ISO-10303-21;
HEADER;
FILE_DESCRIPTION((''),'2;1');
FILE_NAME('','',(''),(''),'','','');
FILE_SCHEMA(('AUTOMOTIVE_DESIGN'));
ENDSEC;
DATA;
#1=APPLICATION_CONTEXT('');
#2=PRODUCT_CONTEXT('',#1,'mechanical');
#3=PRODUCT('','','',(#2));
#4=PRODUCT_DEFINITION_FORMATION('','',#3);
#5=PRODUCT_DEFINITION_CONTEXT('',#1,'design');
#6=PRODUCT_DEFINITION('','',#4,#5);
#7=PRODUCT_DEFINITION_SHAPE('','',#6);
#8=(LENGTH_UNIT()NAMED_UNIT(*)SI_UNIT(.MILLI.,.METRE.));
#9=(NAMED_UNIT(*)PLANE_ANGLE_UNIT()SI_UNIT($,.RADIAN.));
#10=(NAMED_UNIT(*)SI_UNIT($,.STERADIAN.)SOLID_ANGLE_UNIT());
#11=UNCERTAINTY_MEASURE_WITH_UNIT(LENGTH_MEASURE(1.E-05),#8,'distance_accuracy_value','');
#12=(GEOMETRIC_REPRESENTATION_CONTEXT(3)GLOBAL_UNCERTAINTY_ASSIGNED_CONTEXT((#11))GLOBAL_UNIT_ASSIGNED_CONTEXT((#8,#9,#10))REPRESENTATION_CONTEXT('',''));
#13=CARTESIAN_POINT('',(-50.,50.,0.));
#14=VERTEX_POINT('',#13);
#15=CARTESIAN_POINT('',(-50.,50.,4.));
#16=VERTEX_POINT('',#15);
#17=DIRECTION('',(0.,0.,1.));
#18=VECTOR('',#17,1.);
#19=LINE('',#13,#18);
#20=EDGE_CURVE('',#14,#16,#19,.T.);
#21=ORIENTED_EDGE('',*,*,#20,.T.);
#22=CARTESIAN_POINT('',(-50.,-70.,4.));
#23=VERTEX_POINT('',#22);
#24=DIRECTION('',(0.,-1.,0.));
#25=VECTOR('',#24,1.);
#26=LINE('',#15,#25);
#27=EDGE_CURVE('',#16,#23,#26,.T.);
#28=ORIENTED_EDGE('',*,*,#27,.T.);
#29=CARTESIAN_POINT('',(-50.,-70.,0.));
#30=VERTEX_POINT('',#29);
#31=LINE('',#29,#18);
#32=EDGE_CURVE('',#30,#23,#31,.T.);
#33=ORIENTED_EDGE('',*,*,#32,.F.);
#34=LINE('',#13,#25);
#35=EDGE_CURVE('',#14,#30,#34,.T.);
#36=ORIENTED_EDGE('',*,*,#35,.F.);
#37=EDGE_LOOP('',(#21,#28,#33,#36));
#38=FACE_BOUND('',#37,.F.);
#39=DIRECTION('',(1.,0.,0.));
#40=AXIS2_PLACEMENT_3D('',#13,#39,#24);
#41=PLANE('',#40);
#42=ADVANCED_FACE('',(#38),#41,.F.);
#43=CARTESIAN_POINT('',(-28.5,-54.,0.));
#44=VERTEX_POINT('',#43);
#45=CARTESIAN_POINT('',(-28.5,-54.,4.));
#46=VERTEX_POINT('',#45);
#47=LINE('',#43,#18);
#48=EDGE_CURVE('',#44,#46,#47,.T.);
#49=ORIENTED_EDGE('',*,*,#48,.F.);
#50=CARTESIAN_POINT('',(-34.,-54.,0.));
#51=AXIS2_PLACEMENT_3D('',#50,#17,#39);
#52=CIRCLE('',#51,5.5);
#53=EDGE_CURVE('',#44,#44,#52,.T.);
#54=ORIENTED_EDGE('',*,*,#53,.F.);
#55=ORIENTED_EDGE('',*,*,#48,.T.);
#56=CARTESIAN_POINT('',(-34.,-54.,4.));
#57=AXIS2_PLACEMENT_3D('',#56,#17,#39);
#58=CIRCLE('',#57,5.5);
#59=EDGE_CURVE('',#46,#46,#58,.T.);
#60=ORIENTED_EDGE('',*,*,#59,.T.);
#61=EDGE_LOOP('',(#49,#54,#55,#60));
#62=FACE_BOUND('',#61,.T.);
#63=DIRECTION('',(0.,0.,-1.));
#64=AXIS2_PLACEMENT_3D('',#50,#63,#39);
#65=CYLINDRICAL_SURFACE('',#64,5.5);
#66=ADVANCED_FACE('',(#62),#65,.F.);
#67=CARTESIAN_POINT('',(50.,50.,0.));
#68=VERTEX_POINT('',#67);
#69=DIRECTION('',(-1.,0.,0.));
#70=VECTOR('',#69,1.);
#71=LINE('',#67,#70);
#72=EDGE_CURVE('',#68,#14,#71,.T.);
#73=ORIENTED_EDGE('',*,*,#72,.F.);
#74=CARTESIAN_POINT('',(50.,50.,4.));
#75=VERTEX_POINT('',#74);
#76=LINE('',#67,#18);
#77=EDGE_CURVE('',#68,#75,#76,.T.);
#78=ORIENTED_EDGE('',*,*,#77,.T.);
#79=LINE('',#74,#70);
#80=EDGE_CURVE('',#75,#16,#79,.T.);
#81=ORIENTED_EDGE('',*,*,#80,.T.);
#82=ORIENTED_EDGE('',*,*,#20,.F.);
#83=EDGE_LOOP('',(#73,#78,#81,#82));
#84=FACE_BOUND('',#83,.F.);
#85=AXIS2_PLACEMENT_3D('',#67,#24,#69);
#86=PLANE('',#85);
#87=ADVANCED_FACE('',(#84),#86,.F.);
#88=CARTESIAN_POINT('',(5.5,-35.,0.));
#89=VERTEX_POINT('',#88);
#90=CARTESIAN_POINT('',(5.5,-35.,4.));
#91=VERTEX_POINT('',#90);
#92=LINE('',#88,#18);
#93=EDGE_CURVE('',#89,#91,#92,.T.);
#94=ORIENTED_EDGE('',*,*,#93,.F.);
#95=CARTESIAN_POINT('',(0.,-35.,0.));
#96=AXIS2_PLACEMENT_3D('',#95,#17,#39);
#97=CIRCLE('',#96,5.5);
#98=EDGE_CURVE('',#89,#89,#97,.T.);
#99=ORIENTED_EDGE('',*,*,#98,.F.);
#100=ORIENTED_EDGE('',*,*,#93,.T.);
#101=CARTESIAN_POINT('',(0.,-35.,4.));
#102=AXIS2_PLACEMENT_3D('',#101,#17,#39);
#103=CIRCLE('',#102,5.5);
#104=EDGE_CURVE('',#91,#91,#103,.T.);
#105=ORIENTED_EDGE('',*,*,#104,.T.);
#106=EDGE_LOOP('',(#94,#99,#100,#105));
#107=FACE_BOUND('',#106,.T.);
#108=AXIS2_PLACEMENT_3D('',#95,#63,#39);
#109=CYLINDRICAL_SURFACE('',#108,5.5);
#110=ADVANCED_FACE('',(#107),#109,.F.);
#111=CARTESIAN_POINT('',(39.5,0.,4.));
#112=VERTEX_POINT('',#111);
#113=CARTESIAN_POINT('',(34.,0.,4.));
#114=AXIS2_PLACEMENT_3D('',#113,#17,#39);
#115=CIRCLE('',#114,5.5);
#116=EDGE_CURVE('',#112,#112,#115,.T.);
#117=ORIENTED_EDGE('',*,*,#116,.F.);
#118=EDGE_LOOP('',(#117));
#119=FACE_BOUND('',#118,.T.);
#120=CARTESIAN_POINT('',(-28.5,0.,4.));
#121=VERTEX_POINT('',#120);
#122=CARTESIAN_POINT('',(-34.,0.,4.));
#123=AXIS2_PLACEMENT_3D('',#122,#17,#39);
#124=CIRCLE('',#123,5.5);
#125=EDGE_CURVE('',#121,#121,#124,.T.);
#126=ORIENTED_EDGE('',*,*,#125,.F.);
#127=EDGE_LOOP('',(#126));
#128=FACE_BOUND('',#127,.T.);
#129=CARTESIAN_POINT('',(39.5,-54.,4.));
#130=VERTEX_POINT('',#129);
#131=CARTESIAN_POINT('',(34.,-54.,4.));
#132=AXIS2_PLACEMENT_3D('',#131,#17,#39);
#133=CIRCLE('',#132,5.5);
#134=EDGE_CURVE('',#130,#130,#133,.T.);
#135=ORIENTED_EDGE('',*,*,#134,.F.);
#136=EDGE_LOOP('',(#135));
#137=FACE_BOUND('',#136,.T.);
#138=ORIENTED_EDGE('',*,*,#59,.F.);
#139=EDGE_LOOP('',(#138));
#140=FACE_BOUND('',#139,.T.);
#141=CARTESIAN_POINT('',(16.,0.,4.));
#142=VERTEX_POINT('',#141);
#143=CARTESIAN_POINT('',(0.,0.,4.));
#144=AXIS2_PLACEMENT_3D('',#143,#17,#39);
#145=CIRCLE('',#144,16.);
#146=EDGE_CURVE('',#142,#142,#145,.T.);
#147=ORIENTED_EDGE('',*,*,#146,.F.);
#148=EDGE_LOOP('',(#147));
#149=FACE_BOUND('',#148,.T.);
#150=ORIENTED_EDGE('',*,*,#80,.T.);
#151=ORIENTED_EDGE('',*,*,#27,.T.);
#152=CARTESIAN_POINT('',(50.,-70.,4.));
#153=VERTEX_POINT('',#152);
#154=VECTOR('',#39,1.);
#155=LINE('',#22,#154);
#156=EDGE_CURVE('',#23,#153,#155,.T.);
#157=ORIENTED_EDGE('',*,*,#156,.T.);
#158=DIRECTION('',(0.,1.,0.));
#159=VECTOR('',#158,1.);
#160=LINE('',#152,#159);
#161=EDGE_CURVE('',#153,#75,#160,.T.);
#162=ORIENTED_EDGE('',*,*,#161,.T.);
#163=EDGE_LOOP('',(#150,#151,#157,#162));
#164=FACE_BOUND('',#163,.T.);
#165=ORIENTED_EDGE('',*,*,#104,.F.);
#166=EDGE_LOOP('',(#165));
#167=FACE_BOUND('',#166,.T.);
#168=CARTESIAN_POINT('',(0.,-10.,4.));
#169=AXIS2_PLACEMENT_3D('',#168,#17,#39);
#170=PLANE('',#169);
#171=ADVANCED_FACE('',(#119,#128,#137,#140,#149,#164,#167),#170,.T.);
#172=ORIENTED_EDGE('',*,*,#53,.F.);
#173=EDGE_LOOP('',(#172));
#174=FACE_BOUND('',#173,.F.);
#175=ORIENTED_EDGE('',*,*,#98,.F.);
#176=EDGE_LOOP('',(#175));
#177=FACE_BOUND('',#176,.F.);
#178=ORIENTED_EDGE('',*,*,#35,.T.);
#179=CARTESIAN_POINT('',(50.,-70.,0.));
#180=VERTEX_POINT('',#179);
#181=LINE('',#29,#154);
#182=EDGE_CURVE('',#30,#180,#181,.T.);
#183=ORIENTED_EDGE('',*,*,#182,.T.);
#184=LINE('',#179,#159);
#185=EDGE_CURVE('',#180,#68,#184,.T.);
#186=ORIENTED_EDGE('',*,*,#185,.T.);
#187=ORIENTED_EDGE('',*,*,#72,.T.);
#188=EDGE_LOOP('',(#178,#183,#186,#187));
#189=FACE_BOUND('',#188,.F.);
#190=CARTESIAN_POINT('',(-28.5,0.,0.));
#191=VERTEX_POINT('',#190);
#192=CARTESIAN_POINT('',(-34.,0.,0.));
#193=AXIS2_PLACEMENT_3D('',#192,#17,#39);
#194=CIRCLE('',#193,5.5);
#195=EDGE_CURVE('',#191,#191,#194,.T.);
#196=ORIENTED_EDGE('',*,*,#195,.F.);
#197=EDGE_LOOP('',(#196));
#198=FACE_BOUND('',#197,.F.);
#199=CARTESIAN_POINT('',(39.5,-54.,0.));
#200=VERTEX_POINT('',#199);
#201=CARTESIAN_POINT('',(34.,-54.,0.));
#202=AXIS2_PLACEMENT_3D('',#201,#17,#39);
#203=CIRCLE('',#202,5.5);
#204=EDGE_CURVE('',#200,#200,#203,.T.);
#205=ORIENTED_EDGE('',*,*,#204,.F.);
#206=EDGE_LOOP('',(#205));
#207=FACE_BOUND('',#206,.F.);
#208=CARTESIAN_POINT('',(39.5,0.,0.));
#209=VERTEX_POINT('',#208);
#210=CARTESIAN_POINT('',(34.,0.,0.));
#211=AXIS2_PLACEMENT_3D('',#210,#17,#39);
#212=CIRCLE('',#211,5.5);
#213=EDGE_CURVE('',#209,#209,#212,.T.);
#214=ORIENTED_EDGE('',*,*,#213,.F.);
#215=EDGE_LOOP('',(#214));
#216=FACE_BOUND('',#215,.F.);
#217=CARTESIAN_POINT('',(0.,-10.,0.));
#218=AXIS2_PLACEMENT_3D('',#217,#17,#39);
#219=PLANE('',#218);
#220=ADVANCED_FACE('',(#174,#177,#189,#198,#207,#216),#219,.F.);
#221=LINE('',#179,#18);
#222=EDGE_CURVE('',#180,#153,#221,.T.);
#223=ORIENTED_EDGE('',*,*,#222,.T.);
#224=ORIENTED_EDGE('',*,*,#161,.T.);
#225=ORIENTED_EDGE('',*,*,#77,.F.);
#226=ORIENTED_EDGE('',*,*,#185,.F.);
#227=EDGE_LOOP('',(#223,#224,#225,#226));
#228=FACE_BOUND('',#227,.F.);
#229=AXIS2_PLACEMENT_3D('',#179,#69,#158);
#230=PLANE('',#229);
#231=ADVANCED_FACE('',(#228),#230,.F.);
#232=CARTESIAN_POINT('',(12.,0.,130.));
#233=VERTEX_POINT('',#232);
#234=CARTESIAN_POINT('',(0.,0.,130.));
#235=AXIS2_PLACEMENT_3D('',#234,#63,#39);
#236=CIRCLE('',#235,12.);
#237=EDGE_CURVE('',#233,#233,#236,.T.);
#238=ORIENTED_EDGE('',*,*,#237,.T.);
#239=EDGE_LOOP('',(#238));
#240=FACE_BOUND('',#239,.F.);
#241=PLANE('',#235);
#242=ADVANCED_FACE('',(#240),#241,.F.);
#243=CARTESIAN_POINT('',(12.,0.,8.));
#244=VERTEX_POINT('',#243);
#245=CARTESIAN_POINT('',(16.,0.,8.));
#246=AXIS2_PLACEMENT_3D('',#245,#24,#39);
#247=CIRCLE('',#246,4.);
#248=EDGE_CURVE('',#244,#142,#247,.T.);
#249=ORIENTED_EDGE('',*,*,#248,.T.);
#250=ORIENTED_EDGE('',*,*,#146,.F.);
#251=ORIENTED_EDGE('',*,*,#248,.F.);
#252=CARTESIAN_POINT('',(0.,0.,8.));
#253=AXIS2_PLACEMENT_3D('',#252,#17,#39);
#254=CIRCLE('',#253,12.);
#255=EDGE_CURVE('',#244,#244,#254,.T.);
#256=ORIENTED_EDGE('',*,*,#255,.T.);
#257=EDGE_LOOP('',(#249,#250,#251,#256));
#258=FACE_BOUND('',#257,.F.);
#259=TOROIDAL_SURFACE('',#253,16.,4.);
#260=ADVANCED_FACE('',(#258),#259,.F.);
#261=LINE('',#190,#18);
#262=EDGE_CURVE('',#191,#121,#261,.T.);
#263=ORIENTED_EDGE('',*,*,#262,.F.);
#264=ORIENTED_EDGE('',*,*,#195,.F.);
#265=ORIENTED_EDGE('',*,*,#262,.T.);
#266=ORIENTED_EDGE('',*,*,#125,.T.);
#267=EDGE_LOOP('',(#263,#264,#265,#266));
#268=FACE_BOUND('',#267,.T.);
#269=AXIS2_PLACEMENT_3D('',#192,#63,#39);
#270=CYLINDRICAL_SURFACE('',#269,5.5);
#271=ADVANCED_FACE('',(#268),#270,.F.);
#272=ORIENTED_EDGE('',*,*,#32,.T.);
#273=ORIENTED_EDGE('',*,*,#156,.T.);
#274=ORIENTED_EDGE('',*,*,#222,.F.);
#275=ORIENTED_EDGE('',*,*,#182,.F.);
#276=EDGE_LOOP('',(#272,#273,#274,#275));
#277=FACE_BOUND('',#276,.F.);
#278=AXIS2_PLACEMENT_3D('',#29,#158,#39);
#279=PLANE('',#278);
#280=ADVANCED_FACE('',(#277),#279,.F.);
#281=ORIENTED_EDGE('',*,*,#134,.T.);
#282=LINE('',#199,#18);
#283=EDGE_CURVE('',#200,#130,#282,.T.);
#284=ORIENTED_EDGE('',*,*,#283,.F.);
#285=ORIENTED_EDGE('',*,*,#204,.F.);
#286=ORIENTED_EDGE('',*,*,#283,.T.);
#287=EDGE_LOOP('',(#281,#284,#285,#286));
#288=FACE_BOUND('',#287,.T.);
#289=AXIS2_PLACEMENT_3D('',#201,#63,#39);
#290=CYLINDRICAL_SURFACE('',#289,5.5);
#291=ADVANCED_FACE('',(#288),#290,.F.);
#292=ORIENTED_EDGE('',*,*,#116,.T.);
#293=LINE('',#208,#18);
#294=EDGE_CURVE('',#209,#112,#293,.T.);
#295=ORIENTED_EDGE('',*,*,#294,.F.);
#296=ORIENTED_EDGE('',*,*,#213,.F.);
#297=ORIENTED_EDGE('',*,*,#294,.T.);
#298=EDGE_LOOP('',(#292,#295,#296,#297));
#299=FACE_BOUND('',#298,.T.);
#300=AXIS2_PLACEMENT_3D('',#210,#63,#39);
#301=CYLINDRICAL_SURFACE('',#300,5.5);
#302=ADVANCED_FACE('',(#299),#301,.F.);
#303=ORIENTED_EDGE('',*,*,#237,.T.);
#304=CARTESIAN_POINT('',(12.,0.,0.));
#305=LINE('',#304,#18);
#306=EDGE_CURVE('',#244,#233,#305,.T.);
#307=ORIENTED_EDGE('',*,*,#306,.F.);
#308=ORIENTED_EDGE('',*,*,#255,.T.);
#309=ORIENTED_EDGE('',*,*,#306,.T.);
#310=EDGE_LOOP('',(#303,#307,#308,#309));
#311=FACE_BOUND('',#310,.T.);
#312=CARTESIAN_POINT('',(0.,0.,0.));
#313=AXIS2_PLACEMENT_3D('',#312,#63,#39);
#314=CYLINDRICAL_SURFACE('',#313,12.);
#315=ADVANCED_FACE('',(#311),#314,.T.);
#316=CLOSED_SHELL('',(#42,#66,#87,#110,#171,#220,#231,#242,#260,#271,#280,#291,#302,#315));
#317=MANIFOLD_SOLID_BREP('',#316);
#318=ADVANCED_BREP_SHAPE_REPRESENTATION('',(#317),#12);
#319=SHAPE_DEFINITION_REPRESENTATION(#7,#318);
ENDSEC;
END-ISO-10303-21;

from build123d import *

# Parameters (mm, degrees)
F0_R     = 5.5
F0_R_2   = 12
F1_DEPTH = 4
F2_R     = 12
F3_DEPTH = 130
F4_R     = 4


with BuildPart() as f1:
    # F0 (on Top) → F1 (new body)
    with BuildSketch(Plane.XY):
        Polygon((50, 50), (0, 50), (-50, 50), (-50, -70), (0, -70), (50, -70), align=None)
        with Locations((-34, -54)):
            Circle(F0_R, mode=Mode.SUBTRACT)
        with Locations((34, -54)):
            Circle(F0_R, mode=Mode.SUBTRACT)
        with Locations((0, -35)):
            Circle(F0_R, mode=Mode.SUBTRACT)
        with Locations((-34, 0)):
            Circle(F0_R, mode=Mode.SUBTRACT)
        Circle(F0_R_2, mode=Mode.SUBTRACT)
        with Locations((34, 0)):
            Circle(F0_R, mode=Mode.SUBTRACT)
    extrude(amount=F1_DEPTH)

    # F2 (on face) → F3 (join)
    with BuildSketch(Plane(origin=(0, 0, 0), x_dir=(1, 0, 0), z_dir=(0, 0, -1))):
        Circle(F2_R)
    extrude(amount=-F3_DEPTH)

    # F4
    f4_edges = [f1.edges().sort_by_distance(p)[0] for p in [
        (-12, 0, 4),
    ]]
    fillet(f4_edges, radius=F4_R)


solid = f1.part
